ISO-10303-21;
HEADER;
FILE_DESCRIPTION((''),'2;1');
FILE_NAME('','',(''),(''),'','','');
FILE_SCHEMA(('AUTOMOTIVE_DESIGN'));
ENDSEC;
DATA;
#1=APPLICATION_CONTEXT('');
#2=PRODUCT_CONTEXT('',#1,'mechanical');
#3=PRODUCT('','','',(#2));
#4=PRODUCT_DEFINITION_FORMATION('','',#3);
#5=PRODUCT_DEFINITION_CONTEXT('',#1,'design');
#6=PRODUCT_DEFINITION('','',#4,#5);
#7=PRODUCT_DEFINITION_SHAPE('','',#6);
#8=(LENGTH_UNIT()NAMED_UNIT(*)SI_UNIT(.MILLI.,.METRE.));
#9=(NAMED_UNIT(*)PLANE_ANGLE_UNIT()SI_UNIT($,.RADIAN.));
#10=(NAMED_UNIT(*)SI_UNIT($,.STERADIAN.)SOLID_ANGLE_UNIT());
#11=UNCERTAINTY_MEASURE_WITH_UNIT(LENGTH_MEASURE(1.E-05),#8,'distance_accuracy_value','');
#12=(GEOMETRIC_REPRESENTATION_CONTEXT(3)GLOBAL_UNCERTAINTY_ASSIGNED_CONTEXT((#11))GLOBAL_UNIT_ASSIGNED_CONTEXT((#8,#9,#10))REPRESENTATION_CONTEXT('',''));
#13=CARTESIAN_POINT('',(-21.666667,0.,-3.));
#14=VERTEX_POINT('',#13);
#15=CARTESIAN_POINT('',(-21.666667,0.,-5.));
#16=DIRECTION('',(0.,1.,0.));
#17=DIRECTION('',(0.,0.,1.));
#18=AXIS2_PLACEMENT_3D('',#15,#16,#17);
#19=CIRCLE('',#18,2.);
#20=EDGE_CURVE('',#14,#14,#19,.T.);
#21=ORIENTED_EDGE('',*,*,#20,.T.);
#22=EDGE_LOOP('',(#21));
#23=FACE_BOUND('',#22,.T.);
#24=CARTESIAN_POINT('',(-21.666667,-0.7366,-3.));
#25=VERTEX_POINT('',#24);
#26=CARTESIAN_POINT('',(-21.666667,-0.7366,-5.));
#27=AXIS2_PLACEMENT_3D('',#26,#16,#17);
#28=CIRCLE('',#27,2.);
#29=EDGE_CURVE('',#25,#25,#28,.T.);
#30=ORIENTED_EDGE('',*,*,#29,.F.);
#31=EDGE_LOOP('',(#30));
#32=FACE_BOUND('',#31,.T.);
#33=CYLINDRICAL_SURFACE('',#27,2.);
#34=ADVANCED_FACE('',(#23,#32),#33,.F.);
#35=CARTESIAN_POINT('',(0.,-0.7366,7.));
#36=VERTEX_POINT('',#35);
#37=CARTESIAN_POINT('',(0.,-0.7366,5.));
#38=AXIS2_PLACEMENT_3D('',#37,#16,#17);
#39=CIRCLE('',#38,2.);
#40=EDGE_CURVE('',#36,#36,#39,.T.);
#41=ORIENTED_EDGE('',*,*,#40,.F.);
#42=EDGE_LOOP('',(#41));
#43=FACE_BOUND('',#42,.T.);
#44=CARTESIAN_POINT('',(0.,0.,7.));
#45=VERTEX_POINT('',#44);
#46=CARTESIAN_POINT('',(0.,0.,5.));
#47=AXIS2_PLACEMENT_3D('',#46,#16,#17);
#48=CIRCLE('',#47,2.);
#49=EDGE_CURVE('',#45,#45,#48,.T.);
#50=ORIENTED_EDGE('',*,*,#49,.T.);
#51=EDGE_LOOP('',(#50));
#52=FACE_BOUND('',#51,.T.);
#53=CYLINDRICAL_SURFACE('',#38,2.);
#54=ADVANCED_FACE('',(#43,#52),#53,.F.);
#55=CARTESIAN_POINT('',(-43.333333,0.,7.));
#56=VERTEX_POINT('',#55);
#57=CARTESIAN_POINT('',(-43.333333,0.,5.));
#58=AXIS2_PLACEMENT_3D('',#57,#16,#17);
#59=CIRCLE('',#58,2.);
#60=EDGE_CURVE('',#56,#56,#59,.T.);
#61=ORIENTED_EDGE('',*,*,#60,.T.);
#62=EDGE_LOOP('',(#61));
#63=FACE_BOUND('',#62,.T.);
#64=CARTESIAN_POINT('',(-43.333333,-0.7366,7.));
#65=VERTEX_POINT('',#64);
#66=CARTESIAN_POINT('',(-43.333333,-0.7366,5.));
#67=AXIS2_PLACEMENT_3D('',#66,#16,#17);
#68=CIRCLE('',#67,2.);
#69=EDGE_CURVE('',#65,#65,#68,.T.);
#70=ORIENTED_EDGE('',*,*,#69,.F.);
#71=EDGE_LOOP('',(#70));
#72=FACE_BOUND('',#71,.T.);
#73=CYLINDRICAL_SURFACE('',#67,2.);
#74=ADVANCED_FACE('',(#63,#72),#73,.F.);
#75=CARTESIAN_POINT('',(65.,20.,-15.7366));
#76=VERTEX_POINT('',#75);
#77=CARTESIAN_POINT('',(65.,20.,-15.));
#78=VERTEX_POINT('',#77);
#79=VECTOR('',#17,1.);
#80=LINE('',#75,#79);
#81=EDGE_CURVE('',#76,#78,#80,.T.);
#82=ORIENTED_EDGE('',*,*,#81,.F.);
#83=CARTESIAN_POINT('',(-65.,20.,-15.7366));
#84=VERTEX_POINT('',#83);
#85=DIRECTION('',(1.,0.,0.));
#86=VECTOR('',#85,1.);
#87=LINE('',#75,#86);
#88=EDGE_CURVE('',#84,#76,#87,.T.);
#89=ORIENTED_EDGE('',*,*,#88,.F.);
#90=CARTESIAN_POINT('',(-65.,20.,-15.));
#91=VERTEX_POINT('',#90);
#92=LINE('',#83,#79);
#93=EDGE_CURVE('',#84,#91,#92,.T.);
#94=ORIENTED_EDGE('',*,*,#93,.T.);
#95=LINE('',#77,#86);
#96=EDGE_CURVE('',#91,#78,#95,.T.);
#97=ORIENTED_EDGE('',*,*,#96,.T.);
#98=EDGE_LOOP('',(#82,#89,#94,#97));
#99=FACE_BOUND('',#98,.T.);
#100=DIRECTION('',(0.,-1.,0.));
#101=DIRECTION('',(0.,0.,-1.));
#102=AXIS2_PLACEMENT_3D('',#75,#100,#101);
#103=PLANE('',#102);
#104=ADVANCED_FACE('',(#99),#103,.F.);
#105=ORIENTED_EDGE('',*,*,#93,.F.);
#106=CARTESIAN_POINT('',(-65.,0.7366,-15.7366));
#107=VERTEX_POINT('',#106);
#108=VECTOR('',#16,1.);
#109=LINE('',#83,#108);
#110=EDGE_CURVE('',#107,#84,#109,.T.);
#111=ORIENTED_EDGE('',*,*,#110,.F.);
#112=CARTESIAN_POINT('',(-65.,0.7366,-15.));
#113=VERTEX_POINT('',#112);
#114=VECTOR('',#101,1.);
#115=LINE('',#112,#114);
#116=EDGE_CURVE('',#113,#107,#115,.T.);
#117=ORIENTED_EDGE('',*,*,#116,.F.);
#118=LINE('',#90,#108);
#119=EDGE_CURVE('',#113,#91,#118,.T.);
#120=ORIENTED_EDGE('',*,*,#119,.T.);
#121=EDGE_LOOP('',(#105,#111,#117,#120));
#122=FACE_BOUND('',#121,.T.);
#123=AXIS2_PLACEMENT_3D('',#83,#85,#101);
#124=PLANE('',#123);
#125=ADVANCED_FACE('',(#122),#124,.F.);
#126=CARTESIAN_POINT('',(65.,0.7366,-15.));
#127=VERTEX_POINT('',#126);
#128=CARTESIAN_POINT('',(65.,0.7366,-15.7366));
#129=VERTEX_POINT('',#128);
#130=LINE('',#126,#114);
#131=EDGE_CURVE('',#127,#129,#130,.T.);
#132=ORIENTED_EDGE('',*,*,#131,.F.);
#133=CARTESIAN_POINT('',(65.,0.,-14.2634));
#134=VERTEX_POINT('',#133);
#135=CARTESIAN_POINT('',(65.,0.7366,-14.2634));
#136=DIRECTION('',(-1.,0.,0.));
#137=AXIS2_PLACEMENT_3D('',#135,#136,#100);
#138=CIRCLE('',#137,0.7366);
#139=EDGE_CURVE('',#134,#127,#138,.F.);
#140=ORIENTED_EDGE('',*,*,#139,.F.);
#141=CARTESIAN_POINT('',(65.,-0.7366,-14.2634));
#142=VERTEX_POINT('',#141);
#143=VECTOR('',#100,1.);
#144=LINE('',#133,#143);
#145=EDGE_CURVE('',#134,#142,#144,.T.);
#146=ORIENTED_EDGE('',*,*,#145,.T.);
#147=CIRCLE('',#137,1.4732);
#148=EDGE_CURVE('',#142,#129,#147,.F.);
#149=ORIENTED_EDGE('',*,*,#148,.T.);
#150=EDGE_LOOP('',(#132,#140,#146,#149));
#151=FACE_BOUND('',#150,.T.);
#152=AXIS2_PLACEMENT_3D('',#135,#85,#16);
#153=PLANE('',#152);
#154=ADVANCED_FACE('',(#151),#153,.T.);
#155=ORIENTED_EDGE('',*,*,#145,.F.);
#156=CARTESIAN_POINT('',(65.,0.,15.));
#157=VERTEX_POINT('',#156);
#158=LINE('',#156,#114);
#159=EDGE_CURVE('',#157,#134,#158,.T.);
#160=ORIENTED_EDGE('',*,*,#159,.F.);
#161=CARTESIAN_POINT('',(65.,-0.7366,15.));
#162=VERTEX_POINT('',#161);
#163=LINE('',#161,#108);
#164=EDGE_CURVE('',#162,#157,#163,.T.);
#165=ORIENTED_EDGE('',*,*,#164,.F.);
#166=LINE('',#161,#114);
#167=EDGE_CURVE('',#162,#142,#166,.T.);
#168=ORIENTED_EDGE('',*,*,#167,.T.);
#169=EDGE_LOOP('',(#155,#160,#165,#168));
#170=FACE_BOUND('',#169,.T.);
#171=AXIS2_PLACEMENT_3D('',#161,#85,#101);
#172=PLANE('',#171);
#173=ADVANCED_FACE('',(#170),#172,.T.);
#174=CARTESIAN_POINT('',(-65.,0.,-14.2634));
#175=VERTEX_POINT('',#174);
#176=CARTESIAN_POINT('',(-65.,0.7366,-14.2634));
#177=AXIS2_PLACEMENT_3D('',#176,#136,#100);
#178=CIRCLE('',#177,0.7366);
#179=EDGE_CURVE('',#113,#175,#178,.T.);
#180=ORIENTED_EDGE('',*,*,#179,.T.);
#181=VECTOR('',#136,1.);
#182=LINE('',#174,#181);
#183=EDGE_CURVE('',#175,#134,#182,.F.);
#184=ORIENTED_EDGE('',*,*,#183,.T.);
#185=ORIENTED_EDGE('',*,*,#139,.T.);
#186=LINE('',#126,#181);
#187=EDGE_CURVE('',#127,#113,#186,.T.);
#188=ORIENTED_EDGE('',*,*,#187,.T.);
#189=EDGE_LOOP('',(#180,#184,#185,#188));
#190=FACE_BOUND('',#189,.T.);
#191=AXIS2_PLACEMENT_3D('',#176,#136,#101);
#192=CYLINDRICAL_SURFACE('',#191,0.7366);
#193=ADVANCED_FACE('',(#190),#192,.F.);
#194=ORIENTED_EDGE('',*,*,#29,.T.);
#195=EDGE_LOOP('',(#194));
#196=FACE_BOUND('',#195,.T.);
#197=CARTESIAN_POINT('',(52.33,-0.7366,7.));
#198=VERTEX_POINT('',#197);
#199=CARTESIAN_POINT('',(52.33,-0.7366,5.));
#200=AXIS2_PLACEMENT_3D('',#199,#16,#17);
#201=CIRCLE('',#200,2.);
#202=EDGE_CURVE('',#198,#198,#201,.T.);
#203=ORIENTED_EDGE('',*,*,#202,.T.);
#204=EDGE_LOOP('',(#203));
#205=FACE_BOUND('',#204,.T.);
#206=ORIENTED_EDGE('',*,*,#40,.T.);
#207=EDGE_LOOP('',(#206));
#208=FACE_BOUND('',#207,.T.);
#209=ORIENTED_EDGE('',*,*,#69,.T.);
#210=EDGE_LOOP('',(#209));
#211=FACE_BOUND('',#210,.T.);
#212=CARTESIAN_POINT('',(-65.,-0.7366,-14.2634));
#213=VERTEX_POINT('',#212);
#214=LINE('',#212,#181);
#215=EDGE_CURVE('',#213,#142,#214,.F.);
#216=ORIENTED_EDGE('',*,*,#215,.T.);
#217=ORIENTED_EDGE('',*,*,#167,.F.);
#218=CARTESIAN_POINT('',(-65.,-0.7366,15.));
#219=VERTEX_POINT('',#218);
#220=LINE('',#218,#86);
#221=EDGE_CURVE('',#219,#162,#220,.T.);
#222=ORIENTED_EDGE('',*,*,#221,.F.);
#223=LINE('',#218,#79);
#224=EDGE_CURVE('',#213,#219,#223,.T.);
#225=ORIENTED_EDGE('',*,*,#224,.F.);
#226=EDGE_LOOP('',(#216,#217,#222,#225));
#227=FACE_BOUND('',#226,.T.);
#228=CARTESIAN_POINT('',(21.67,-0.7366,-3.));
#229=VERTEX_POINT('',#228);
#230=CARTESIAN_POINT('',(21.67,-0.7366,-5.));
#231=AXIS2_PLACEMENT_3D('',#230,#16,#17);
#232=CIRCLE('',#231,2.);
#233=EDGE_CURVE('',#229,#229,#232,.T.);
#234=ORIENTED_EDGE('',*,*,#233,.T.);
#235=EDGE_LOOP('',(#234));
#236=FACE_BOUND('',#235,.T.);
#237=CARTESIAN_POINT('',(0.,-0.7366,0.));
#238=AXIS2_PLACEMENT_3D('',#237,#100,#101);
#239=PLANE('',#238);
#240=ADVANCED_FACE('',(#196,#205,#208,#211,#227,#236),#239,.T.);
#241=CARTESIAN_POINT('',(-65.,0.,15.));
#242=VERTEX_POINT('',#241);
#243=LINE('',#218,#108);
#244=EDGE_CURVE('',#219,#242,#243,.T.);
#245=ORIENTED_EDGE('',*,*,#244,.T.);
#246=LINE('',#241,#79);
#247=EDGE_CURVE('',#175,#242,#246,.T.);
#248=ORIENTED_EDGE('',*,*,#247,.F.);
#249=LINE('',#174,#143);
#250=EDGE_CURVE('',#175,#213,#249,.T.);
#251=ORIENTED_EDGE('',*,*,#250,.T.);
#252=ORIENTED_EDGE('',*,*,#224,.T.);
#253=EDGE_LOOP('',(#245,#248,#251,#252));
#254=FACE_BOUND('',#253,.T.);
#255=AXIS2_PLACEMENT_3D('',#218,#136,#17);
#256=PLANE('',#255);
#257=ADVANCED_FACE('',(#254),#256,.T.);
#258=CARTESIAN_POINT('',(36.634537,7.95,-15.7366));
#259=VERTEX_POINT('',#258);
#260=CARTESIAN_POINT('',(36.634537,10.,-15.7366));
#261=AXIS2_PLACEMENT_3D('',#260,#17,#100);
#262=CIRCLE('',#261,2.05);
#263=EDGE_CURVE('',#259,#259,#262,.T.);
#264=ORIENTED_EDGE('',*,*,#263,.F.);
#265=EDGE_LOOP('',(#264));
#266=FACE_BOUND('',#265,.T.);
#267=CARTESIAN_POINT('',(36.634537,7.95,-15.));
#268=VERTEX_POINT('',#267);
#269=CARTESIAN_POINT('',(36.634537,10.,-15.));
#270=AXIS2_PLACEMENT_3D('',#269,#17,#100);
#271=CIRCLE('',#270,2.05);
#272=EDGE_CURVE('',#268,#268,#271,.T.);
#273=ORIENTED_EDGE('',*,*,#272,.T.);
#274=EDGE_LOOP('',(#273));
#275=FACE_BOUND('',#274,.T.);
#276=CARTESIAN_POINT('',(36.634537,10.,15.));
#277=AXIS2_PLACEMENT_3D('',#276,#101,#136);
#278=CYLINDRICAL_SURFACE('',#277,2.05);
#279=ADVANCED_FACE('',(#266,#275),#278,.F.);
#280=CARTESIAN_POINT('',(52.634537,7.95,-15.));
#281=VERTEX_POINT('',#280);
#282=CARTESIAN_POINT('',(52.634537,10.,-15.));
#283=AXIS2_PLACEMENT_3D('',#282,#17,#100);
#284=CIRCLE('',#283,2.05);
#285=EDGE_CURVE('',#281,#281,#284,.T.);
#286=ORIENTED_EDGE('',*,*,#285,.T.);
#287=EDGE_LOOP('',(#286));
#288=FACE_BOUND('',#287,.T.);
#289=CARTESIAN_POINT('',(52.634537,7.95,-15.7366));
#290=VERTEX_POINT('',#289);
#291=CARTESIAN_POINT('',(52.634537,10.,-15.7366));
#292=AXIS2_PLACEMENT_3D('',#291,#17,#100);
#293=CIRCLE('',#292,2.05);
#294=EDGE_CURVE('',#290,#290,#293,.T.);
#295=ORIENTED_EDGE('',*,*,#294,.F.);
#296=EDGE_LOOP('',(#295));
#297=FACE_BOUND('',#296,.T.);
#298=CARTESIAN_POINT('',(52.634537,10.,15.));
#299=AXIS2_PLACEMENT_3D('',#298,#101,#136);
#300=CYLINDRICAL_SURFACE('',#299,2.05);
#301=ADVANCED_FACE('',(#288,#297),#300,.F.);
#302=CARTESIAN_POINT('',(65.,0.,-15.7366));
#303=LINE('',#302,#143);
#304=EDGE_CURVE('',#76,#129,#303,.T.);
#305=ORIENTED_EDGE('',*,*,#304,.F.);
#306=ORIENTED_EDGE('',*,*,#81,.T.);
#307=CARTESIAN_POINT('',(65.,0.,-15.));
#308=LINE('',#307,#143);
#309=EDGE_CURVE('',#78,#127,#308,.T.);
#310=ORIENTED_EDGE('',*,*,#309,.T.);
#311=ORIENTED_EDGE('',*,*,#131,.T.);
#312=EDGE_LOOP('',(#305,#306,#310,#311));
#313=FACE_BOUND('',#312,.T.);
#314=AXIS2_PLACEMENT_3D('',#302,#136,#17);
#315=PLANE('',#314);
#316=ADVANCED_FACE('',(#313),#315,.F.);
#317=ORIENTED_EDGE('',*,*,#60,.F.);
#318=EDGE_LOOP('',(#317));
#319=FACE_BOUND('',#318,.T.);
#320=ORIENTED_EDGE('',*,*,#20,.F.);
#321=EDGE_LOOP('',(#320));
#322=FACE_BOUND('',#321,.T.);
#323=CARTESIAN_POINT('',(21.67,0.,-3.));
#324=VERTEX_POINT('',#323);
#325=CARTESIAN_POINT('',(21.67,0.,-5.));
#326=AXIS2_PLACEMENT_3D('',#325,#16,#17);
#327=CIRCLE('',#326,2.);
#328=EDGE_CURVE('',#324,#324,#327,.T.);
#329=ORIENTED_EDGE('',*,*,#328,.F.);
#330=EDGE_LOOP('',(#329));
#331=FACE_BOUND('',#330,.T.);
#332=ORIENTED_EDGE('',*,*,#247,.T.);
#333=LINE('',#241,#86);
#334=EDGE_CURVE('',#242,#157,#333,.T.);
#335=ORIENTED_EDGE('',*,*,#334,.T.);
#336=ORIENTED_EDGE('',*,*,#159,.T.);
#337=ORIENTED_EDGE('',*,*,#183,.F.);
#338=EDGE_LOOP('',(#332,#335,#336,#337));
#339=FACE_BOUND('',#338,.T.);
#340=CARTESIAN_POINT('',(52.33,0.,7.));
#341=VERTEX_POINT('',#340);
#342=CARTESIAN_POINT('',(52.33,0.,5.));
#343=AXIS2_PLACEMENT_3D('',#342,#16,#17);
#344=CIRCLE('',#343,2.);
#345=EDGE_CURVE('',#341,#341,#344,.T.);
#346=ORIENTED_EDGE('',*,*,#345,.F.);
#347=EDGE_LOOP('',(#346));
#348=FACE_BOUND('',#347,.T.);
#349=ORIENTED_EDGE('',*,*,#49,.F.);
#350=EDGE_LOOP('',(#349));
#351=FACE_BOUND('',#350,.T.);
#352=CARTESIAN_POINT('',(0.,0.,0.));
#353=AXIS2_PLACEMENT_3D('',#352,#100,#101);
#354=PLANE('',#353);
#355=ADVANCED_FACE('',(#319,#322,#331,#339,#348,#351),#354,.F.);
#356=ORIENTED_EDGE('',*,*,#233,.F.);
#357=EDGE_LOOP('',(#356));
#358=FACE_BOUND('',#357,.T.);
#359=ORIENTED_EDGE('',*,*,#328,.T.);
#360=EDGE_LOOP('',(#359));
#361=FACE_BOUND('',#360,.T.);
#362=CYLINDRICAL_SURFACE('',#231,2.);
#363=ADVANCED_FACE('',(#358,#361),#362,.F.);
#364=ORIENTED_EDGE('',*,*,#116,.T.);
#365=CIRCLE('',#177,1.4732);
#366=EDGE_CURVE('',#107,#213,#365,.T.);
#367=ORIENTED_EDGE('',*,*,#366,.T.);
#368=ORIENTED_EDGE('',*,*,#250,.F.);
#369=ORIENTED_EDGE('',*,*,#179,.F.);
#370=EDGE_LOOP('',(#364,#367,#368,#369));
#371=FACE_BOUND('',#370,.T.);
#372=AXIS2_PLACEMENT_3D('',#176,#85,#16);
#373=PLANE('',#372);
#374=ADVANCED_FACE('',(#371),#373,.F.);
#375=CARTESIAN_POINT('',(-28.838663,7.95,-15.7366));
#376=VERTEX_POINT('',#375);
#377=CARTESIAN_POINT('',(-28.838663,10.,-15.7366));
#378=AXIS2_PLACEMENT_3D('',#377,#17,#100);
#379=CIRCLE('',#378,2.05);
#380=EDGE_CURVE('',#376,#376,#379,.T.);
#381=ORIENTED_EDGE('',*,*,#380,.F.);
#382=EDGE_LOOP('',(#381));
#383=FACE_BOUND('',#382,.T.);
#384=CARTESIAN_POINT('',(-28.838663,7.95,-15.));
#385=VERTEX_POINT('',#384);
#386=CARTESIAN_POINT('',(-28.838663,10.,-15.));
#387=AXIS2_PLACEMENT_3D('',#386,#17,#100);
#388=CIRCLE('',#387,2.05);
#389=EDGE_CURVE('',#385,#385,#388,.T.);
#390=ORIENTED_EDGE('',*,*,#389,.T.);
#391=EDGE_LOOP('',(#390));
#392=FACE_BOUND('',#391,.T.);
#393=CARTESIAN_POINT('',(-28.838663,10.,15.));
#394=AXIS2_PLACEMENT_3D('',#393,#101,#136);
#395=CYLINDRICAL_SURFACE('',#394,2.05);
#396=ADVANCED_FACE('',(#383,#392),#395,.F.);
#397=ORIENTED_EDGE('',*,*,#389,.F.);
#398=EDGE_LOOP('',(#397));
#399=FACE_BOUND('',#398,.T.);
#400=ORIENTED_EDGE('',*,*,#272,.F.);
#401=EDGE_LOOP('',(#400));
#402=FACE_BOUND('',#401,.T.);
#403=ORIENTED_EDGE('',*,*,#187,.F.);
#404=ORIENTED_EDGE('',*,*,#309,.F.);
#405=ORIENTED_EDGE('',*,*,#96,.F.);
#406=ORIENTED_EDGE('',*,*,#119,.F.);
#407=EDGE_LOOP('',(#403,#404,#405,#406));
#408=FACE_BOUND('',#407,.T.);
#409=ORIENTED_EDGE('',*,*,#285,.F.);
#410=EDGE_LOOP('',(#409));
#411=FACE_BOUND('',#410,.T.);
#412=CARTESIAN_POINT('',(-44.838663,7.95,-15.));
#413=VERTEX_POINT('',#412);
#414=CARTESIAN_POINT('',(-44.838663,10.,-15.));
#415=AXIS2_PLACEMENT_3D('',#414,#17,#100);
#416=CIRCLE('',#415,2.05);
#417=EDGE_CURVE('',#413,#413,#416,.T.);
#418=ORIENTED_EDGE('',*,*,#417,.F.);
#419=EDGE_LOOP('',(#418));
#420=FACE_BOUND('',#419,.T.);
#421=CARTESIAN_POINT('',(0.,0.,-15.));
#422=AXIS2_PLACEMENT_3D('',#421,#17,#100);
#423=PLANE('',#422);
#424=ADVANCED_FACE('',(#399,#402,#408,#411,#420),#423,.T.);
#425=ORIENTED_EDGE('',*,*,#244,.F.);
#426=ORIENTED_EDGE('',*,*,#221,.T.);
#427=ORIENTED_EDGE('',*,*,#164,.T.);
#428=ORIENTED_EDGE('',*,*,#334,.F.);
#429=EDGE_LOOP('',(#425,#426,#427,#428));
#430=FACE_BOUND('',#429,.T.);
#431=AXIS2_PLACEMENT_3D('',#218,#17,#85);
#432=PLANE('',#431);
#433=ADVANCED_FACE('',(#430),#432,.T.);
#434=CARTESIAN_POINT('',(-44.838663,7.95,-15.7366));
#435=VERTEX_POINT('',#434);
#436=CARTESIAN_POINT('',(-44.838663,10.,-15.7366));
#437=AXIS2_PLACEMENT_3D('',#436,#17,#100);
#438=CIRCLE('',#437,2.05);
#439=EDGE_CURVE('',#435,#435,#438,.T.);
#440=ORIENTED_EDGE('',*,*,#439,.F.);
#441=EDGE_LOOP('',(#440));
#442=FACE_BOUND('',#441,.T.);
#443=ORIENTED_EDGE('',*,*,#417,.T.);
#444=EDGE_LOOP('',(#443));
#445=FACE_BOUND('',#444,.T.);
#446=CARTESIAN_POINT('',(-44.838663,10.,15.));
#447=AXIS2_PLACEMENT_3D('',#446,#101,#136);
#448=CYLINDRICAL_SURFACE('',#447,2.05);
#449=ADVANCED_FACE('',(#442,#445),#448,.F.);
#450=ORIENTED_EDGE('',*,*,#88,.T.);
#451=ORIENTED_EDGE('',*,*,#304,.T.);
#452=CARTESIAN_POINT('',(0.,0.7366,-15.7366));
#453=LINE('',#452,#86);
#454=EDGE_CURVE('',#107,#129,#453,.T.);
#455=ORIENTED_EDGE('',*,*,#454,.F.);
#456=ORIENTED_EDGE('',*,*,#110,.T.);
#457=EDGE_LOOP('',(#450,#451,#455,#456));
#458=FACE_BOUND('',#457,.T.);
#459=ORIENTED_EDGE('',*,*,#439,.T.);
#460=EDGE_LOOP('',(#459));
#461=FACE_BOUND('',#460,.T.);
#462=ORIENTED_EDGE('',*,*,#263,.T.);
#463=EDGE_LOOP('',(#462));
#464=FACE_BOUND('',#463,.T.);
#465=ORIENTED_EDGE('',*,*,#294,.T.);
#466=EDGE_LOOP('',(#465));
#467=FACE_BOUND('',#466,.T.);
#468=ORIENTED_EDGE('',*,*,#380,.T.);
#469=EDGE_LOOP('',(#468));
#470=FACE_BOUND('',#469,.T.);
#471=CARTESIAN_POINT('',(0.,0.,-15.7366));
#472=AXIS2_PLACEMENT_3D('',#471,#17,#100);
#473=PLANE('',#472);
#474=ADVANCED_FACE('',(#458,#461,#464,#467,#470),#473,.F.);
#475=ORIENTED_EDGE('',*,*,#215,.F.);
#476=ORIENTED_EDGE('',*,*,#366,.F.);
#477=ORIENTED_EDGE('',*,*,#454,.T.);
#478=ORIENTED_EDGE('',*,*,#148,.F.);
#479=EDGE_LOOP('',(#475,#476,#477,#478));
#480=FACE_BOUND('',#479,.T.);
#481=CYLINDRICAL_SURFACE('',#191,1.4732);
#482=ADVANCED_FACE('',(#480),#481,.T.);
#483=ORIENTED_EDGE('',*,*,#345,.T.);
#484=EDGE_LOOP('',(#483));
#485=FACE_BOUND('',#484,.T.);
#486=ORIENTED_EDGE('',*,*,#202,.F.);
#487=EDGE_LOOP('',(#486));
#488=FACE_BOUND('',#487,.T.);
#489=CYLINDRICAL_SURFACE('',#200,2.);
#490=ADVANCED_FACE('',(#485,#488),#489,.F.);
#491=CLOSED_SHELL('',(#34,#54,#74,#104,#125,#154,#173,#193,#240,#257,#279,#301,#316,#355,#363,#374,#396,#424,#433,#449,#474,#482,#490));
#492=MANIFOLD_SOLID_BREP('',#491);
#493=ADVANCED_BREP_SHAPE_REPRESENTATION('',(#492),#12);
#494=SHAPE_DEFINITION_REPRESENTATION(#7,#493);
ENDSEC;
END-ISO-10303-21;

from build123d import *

# Parameters (mm, degrees)
SKETCH1_W                    = 130
SKETCH1_H                    = 30
SKETCH1_R                    = 2
BASE_FLANGE1_DEPTH           = 0.7366
EDGE_FLANGE1_STRIP_W         = 4.4196
EDGE_FLANGE1_STRIP_H         = 0.7366
EDGE_FLANGE1_STRIP_CUT_DEPTH = 130
EDGE_FLANGE1_DEPTH           = 130
SKETCH9_R                    = 2.05
CUT_EXTRUDE1_DEPTH           = 245.182063336


# Sheet-metal steps are written as plain solids
with BuildPart() as part:
    # Sketch1 → Base-Flange1 (new body)
    with BuildSketch(Plane(origin=(0, 0, 0), x_dir=(1, 0, 0), z_dir=(0, 1, 0))):
        Rectangle(SKETCH1_W, SKETCH1_H)
        with Locations(Location((0, -5, 0), (0, 0, 270))):
            Circle(SKETCH1_R, mode=Mode.SUBTRACT)
        with Locations(Location((-21.666666667, 5, 0), (0, 0, 270))):
            Circle(SKETCH1_R, mode=Mode.SUBTRACT)
        with Locations(Location((-43.333333333, -5, 0), (0, 0, 270))):
            Circle(SKETCH1_R, mode=Mode.SUBTRACT)
        with Locations(Location((52.33, -5, 0), (0, 0, 270))):
            Circle(SKETCH1_R, mode=Mode.SUBTRACT)
        with Locations(Location((21.67, 5, 0), (0, 0, 270))):
            Circle(SKETCH1_R, mode=Mode.SUBTRACT)
    extrude(amount=-BASE_FLANGE1_DEPTH)

    # Edge-Flange1 strip (across the edge) → Edge-Flange1 strip cut (cut)
    with BuildSketch(Plane(origin=(65, 0, -15), x_dir=(0, 0, 1), z_dir=(-1, 0, 0))):
        with Locations((-1.4732, -0.3683)):
            Rectangle(EDGE_FLANGE1_STRIP_W, EDGE_FLANGE1_STRIP_H)
    extrude(amount=EDGE_FLANGE1_STRIP_CUT_DEPTH, mode=Mode.SUBTRACT)

    # Edge-Flange1 section (across the edge) → Edge-Flange1 (add)
    with BuildSketch(Plane(origin=(65, 0, -15), x_dir=(0, 0, 1), z_dir=(-1, 0, 0))):
        with BuildLine():
            Line((-0.7366, 0.7366), (-0.7366, 20))
            Line((-0.7366, 20), (0, 20))
            Line((0, 20), (0, 0.7366))
            ThreePointArc((0, 0.7366), (0.215745145, 0.215745145), (0.7366, 0))
            Line((0.7366, 0), (0.7366, -0.7366))
            ThreePointArc((0.7366, -0.7366), (-0.30510971, -0.30510971), (-0.7366, 0.7366))
        make_face()
    extrude(amount=EDGE_FLANGE1_DEPTH)

    # Sketch9 → Cut-Extrude1 (cut, through all)
    with BuildSketch(Plane(origin=(-5.975935003, -11.740421973, -216.4732), x_dir=(-1, 0, 0), z_dir=(0, 0, -1))):
        with Locations(Location((-42.610472437, 21.740421973, 0), (0, 0, 270))):
            Circle(SKETCH9_R)
        with Locations(Location((-58.610472437, 21.740421973, 0), (0, 0, 270))):
            Circle(SKETCH9_R)
        with Locations(Location((22.862727563, 21.740421973, 0), (0, 0, 270))):
            Circle(SKETCH9_R)
        with Locations(Location((38.862727563, 21.740421973, 0), (0, 0, 270))):
            Circle(SKETCH9_R)
    extrude(amount=-CUT_EXTRUDE1_DEPTH, mode=Mode.SUBTRACT)


solid = part.part
